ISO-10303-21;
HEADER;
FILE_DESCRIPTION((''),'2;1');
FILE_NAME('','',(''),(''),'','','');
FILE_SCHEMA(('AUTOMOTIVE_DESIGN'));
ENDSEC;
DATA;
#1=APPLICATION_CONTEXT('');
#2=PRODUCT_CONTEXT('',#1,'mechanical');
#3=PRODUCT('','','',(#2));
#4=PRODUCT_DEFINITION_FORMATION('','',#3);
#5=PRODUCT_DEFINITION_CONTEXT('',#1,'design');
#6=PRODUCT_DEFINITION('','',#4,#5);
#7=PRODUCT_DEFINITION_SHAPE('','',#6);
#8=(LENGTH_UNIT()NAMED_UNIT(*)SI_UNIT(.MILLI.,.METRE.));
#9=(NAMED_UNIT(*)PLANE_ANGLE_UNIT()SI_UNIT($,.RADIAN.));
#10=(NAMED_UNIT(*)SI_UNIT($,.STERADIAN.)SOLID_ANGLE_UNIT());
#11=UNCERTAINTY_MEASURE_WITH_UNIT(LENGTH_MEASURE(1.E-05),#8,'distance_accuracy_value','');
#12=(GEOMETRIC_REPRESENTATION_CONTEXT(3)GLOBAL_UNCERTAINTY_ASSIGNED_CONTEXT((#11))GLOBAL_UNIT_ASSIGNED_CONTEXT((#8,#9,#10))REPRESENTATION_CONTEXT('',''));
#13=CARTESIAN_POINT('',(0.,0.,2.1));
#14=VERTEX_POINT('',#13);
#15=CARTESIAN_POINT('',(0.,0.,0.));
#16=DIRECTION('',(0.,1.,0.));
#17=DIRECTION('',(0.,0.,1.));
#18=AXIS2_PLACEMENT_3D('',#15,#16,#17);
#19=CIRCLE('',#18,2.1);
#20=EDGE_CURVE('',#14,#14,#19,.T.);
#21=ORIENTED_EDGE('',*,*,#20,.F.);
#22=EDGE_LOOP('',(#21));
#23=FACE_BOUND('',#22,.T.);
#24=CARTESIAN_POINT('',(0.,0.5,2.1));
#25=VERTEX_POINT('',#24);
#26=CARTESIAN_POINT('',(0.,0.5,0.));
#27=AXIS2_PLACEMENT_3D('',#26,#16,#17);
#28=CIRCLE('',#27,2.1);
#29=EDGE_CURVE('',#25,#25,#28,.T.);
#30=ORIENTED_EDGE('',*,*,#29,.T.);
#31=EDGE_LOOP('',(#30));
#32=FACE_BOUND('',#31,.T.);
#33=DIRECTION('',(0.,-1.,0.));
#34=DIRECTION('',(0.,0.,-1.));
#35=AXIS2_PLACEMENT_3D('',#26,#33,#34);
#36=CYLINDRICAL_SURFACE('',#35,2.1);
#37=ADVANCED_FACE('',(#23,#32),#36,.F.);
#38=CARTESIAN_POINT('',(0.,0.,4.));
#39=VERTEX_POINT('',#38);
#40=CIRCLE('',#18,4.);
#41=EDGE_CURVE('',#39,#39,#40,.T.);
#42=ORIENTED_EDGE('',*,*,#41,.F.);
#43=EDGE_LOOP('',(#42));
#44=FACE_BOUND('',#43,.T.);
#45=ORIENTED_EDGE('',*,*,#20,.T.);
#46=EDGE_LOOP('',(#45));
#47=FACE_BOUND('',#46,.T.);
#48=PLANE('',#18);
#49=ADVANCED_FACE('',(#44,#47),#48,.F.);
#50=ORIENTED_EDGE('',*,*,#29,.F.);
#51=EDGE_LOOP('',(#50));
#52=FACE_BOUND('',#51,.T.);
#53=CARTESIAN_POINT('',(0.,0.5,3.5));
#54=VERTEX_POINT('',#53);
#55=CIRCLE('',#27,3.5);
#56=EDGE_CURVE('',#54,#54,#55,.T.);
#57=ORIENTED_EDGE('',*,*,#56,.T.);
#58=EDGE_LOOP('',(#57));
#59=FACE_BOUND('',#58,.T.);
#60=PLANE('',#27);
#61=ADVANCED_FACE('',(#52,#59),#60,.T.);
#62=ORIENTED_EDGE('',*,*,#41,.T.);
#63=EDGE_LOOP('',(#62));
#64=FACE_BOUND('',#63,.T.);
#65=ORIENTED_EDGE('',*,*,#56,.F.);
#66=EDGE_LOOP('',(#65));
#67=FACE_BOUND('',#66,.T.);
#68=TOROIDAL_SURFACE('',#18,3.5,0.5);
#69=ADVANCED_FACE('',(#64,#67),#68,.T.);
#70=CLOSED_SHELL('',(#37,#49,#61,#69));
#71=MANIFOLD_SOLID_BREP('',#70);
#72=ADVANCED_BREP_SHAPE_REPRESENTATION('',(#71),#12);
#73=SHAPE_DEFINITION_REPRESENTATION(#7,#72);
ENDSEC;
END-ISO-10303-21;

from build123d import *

# Parameters (mm, degrees)
SKETCH1_R           = 4
SKETCH1_R_2         = 2.1
BOSS_EXTRUDE1_DEPTH = 0.5
FILLET2_R           = 0.5


with BuildPart() as part:
    # Sketch1 → Boss-Extrude1 (new body)
    with BuildSketch(Plane(origin=(0, 0, 0), x_dir=(1, 0, 0), z_dir=(0, 1, 0))):
        with Locations(Location((0, 0, 0), (0, 0, 270))):
            Circle(SKETCH1_R)
        with Locations(Location((0, 0, 0), (0, 0, 270))):
            Circle(SKETCH1_R_2, mode=Mode.SUBTRACT)
    extrude(amount=BOSS_EXTRUDE1_DEPTH)

    # Fillet2
    fillet2_edges = [part.edges().sort_by_distance(p)[0] for p in [
        (0, 0.5, -4),
    ]]
    fillet(fillet2_edges, radius=FILLET2_R - 0.0001)  # a hair under: the kernel refuses the full size


solid = part.part
